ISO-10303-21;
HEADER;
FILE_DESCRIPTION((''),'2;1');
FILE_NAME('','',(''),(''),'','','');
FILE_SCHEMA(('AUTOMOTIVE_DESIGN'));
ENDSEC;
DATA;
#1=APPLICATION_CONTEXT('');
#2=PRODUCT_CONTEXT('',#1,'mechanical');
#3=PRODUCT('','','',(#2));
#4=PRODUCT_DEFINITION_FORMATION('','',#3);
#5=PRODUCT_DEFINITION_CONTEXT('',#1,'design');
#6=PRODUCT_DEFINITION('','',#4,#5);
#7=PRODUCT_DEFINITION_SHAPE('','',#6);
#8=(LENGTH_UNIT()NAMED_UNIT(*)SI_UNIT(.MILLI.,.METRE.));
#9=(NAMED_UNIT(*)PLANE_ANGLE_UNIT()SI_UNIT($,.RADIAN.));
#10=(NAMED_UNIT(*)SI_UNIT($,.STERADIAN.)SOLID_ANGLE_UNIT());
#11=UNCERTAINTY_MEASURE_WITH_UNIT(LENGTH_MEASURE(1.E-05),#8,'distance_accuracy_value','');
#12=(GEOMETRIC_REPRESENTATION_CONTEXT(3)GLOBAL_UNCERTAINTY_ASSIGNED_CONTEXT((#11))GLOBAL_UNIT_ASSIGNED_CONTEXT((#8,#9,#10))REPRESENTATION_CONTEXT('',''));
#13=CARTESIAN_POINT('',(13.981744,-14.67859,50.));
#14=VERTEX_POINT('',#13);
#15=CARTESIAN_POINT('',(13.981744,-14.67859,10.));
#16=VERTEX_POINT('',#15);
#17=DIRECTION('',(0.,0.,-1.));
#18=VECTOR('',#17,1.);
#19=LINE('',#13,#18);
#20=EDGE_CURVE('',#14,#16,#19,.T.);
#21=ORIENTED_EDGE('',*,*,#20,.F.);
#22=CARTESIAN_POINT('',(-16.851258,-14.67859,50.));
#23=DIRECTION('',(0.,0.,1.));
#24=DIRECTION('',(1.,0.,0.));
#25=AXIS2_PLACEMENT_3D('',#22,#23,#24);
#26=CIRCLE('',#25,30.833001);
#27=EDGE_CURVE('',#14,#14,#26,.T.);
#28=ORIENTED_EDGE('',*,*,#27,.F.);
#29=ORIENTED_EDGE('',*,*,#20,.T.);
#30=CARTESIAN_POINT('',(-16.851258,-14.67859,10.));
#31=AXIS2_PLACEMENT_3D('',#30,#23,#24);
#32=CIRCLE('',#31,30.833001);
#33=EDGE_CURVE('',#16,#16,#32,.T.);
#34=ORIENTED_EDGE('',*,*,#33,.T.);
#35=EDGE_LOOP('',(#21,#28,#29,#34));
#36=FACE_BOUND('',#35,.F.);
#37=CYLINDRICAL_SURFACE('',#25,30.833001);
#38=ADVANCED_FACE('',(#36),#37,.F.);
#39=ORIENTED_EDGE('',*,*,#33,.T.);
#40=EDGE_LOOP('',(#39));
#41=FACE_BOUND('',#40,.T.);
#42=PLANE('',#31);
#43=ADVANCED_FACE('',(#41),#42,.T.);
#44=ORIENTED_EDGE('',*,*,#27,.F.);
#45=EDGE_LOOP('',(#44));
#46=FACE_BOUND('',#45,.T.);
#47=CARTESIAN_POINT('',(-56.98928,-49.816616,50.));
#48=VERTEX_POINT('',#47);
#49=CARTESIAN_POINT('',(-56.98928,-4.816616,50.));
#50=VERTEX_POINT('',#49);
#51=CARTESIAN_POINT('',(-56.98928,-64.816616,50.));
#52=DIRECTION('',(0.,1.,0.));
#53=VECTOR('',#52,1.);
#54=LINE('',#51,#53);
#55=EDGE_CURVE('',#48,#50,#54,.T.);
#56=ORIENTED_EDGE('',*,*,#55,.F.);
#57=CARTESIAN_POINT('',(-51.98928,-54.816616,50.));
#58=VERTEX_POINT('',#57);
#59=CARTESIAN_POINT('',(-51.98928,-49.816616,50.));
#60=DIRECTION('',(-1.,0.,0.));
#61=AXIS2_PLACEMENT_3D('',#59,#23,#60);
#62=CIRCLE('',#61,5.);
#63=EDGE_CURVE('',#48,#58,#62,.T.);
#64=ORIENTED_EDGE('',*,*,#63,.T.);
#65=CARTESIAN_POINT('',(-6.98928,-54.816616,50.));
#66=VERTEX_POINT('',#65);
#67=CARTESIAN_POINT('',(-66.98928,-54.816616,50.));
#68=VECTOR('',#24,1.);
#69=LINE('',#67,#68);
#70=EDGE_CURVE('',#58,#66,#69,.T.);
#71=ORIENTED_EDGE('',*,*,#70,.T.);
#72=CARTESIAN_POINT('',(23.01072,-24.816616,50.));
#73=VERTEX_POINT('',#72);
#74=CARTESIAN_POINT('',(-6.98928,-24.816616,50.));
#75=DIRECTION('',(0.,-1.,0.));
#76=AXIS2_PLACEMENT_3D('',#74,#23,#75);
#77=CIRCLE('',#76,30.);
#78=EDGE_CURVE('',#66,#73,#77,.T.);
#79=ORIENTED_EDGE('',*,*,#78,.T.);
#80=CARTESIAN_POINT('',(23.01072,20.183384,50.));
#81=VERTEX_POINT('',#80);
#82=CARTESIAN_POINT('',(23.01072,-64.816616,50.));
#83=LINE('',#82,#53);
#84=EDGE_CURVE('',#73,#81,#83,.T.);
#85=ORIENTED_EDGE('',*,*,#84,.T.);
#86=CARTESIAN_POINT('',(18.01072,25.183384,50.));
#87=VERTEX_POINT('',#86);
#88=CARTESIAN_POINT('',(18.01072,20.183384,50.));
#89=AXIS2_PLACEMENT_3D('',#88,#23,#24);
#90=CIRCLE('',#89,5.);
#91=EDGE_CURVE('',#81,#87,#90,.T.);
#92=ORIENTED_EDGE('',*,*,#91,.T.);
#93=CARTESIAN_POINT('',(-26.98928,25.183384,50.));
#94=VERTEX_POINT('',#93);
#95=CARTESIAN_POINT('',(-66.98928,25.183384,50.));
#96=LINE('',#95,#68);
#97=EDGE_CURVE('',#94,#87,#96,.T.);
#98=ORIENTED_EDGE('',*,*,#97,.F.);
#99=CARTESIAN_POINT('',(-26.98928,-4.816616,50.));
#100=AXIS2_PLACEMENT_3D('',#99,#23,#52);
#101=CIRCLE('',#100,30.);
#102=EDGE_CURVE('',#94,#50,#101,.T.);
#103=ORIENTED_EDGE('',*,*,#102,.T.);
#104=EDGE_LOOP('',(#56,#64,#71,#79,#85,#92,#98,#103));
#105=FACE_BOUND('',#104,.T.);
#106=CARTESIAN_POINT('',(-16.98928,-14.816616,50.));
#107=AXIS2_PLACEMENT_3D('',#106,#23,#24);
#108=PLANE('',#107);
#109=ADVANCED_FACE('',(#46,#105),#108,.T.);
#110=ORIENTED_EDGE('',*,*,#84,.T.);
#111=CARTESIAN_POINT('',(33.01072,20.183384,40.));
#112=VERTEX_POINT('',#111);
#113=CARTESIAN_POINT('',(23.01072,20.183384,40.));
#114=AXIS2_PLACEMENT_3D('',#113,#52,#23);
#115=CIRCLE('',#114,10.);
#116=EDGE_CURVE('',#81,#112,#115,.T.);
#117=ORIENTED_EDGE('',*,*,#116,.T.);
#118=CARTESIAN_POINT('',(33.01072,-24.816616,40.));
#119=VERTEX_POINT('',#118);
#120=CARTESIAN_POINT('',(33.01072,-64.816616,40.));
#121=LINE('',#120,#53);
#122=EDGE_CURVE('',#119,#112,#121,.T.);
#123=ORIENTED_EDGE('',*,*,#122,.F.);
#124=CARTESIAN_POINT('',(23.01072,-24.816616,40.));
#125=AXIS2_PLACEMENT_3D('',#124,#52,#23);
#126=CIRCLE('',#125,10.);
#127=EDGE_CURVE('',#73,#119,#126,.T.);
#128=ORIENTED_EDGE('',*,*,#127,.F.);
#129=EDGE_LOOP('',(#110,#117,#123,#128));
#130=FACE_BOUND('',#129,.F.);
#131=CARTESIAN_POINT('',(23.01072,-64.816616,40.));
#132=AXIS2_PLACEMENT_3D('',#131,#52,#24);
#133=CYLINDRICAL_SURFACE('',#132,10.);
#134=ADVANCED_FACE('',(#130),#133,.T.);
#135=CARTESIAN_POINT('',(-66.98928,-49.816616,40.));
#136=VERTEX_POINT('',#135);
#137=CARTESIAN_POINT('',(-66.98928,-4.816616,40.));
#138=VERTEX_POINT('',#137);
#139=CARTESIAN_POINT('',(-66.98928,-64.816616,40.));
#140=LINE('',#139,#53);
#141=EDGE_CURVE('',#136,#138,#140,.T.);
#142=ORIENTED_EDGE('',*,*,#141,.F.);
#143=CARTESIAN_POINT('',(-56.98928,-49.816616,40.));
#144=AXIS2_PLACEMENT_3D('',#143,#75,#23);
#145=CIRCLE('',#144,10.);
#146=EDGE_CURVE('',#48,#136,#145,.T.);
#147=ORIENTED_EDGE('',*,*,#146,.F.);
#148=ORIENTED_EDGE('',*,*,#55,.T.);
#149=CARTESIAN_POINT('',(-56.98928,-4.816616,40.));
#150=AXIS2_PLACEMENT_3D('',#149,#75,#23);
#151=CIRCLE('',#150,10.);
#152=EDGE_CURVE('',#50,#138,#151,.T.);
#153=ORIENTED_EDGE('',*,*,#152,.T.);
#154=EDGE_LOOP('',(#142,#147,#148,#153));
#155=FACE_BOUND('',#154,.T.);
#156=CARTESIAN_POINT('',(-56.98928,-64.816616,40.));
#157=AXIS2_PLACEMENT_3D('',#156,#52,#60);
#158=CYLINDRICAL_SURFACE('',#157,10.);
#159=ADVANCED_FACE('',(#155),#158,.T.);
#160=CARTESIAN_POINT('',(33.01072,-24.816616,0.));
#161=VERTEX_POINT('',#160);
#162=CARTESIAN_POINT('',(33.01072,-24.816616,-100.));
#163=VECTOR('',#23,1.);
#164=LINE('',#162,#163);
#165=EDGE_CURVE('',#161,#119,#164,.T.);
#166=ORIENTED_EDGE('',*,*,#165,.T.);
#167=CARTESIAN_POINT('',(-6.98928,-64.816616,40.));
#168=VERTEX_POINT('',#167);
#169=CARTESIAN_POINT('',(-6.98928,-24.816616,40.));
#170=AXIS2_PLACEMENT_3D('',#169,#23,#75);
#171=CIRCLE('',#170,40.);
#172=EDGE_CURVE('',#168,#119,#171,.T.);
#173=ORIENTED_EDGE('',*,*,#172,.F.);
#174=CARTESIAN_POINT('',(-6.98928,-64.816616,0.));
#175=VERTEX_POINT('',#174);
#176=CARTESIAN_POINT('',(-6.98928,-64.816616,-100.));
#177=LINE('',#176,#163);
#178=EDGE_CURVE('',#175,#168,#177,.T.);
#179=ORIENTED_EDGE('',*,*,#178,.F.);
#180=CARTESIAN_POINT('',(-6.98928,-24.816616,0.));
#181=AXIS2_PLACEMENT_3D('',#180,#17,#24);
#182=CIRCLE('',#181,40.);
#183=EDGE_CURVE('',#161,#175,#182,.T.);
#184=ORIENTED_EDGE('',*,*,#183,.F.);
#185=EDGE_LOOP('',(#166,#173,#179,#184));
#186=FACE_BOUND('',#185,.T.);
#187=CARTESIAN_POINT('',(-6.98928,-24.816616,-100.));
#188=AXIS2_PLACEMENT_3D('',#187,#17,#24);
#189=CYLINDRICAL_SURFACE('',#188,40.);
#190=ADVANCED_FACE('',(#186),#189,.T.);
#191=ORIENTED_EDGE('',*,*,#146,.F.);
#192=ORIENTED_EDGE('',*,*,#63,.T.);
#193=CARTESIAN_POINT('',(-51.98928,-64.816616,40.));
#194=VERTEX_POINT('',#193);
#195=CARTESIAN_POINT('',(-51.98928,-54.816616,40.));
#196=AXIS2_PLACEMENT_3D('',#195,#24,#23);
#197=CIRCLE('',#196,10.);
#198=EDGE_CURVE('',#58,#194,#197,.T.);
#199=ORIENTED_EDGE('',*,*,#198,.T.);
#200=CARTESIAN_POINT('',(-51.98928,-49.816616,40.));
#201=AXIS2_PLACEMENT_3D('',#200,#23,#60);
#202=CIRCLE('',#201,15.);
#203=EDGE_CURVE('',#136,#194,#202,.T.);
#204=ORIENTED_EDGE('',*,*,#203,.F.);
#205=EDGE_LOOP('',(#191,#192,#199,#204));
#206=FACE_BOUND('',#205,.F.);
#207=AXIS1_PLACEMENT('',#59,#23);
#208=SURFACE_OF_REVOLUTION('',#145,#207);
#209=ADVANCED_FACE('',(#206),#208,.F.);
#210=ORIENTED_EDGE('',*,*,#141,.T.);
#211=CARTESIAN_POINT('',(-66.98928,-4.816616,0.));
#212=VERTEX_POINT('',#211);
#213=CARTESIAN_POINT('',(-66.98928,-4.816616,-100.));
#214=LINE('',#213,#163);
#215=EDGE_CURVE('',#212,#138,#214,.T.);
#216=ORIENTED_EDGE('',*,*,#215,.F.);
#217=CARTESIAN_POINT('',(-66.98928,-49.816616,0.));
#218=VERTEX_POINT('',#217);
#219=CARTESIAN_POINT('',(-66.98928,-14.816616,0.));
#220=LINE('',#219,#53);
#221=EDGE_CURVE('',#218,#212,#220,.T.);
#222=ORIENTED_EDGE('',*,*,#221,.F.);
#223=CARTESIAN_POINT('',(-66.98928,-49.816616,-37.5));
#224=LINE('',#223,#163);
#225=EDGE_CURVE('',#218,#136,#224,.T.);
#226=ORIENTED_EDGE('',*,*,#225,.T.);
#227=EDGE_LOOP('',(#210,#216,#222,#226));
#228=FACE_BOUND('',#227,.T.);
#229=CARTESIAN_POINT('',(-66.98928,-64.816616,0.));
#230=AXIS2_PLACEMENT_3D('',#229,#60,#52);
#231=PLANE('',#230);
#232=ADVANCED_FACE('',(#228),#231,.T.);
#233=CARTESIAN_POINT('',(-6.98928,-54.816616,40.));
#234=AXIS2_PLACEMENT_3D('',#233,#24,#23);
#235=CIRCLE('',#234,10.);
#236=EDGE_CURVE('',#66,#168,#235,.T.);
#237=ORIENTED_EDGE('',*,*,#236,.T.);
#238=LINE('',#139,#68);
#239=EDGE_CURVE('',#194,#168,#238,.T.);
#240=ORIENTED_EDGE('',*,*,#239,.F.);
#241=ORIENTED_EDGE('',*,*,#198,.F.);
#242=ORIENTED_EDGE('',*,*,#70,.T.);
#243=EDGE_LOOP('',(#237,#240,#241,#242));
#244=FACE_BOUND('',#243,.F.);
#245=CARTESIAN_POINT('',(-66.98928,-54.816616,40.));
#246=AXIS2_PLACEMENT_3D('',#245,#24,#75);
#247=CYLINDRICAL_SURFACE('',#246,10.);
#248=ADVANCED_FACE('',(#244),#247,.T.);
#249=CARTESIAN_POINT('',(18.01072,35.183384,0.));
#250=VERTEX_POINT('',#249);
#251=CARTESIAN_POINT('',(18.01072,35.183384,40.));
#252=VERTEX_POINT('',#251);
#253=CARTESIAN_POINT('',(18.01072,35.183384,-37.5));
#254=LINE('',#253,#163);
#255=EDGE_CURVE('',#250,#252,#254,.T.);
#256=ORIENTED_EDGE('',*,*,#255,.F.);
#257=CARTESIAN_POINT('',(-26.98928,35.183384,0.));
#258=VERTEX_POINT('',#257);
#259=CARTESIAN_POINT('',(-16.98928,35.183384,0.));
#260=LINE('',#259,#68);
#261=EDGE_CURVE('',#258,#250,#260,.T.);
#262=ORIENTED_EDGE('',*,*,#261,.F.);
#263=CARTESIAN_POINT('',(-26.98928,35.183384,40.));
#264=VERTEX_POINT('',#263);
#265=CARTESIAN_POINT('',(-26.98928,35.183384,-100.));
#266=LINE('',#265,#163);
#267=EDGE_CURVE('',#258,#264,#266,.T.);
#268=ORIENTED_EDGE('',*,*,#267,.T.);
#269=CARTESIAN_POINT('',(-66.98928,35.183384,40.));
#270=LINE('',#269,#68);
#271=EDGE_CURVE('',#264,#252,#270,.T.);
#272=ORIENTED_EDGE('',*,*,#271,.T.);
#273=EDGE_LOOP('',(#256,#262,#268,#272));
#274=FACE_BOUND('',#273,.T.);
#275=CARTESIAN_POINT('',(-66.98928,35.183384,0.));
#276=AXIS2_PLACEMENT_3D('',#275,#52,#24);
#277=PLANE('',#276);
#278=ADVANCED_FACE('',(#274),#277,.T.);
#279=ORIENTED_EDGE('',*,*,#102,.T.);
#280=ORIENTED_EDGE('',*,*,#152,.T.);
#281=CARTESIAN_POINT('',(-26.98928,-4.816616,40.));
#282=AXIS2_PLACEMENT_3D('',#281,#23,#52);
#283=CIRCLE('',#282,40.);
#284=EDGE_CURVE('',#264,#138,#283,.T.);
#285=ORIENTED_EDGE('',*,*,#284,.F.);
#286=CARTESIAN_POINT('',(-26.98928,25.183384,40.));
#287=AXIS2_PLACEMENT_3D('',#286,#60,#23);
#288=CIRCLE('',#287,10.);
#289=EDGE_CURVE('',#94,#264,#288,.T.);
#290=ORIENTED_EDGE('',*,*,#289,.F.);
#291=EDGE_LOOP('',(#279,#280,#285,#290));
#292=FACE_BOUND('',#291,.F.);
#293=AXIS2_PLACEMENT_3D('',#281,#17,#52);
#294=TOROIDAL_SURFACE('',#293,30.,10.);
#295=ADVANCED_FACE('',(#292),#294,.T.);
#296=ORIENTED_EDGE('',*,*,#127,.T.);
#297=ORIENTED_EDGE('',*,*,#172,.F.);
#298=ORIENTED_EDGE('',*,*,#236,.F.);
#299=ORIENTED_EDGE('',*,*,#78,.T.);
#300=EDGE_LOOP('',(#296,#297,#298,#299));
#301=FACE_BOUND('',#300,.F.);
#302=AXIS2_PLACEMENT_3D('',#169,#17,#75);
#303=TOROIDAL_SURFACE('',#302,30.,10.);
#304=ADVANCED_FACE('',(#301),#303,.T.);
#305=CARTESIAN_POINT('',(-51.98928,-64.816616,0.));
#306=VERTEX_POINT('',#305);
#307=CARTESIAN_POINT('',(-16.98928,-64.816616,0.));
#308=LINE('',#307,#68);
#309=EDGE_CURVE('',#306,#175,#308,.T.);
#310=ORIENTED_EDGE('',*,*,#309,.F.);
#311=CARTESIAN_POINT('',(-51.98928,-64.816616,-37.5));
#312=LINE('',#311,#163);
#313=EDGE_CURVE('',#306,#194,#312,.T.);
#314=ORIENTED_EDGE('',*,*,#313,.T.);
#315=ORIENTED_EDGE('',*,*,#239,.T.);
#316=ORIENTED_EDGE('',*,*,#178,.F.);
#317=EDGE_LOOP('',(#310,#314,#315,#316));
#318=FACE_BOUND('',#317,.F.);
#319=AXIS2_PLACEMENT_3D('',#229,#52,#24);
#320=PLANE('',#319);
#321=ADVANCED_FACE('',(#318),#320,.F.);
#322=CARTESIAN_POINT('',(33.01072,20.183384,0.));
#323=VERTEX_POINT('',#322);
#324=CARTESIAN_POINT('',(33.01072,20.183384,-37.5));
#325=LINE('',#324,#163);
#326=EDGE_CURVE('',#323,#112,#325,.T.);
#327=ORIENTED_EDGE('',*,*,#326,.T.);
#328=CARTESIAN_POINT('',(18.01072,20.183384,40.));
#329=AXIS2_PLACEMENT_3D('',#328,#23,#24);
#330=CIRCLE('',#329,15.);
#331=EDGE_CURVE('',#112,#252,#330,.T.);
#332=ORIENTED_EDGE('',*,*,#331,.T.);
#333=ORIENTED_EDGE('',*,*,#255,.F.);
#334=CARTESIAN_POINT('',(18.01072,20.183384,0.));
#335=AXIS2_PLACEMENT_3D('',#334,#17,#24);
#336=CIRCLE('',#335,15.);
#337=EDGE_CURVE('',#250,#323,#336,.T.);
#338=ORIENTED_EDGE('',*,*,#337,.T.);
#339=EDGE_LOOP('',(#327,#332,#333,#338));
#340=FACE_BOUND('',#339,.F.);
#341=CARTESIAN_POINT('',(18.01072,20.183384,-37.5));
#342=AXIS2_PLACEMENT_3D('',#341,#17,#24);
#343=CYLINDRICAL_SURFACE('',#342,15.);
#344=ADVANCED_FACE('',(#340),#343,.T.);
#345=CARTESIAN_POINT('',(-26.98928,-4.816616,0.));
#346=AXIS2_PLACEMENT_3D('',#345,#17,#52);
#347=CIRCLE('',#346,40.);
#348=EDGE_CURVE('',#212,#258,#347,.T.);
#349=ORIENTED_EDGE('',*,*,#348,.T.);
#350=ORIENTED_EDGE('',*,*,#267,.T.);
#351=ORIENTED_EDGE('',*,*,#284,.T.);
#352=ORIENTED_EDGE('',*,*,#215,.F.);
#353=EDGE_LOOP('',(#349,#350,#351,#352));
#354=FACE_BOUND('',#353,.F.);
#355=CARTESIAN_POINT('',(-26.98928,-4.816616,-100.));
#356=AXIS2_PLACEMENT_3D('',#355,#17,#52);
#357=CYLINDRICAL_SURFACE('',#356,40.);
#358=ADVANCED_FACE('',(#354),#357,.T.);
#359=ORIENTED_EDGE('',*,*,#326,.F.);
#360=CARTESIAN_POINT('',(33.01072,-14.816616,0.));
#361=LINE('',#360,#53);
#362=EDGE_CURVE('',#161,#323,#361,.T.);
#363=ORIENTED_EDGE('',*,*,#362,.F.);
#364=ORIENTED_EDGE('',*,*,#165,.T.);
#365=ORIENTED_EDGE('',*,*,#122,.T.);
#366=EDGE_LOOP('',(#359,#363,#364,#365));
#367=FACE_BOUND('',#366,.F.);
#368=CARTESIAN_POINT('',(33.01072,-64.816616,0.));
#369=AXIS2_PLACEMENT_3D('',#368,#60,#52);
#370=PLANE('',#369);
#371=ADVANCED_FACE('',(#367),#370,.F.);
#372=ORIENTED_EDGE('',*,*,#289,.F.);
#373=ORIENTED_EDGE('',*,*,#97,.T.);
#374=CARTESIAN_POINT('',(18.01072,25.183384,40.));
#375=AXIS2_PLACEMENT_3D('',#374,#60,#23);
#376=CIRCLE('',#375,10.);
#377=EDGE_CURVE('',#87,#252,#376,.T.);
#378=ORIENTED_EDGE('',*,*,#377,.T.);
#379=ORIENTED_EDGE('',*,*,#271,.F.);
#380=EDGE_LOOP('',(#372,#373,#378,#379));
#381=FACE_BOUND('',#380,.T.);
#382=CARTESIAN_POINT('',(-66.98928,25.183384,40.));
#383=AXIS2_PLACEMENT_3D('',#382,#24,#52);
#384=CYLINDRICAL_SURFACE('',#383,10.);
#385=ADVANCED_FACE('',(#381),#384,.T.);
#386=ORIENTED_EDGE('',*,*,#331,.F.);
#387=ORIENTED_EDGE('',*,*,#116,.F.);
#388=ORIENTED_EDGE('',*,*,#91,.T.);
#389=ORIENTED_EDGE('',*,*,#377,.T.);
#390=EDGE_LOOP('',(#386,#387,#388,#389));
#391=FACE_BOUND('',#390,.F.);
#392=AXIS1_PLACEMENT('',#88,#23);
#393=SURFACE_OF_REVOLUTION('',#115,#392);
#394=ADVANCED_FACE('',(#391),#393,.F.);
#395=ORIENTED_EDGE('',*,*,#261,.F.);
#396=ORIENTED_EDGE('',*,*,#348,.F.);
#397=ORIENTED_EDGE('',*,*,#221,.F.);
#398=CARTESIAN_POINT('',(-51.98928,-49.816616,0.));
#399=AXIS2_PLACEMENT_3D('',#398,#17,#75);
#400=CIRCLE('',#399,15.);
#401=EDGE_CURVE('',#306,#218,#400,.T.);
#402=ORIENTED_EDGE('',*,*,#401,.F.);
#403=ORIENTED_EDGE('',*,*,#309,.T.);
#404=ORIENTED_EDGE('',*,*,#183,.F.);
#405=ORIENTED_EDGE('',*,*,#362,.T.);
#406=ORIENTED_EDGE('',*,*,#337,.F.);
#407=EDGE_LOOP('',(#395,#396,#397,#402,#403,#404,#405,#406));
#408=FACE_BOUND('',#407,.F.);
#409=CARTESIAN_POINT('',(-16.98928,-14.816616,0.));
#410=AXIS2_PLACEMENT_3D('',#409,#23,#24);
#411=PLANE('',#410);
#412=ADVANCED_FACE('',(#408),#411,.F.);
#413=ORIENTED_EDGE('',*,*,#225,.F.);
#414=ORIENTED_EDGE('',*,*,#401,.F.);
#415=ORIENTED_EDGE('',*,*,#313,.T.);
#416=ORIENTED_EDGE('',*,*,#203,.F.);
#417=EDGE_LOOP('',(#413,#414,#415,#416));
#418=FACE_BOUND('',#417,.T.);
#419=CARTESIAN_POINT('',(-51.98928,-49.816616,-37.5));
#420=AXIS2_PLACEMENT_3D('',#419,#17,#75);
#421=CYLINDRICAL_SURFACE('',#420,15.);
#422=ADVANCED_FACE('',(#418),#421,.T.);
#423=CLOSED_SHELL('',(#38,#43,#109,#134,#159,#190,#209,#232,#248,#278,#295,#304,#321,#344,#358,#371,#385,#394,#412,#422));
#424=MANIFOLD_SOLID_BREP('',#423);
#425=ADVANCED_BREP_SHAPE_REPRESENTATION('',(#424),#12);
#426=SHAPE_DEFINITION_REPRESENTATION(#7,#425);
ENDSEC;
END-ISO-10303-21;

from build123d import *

# Parameters (mm, degrees)
F0_W        = 100
F0_H        = 100
F1_DEPTH    = 50
F2_R        = 10
F3_T1_DEPTH = 150
F3_T4_ANGLE = 90
F3_T6_ANGLE = 90
F4_T1_DEPTH = 87.5
F4_T4_ANGLE = 90
F4_T6_ANGLE = 90
F5_R        = 30.8330010445
F6_DEPTH    = 40


# Not quite as in the source:
# - a fillet or chamfer that OpenCascade refuses, or shapes differently, is made with other operations: its cross-section is extruded or revolved along the edge and cut away or added


with BuildPart() as f1:
    # F0 (on Top) → F1 (new body)
    with BuildSketch(Plane.XY):
        with Locations((-16.9892802835, -14.8166164756)):
            Rectangle(F0_W, F0_H)
    extrude(amount=F1_DEPTH)

    # F2
    f2_edges = [f1.edges().sort_by_distance(p)[0] for p in [
        (-16.98928, -64.816616, 50),
        (33.01072, -14.816616, 50),
        (-16.98928, 35.183384, 50),
        (-66.98928, -14.816616, 50),
    ]]
    fillet(f2_edges, radius=F2_R)

    # F3: fillet of radius 40 on 2 edges, made by hand

    # F3_s2 → F3_t1 (cut)
    with BuildSketch(Plane.XY.offset(-100)):
        with BuildLine():
            ThreePointArc((33.0107197165, -24.8166164756), (21.294990964, -53.100887723), (-6.9892802835, -64.8166164756))
            Line((-6.9892802835, -64.8166164756), (33.0107197165, -64.8166164756))
            Line((33.0107197165, -64.8166164756), (33.0107197165, -24.8166164756))
        make_face()
        with BuildLine():
            ThreePointArc((-26.9892802835, 35.1833835244), (-55.2735515309, 23.4676547719), (-66.9892802835, -4.8166164756))
            Line((-66.9892802835, -4.8166164756), (-66.9892802835, 35.1833835244))
            Line((-66.9892802835, 35.1833835244), (-26.9892802835, 35.1833835244))
        make_face()
    extrude(amount=F3_T1_DEPTH, mode=Mode.SUBTRACT)

    # F3_s3 → F3_t4 (revolve, cut)
    with BuildSketch(Plane.YZ.offset(-26.9892802835)):
        with BuildLine():
            ThreePointArc((25.1833835244, 50), (32.2544513363, 47.0710678119), (35.1833835244, 40))
            Line((35.1833835244, 40), (35.1833835244, 50))
            Line((35.1833835244, 50), (25.1833835244, 50))
        make_face()
    revolve(axis=Axis((-26.9892802835, -4.8166164756, 50), (0, 0, 1)), revolution_arc=F3_T4_ANGLE, mode=Mode.SUBTRACT)

    # F3_s5 → F3_t6 (revolve, cut)
    with BuildSketch(Plane.YZ.offset(-6.9892802835)):
        with BuildLine():
            ThreePointArc((-54.8166164756, 50), (-61.8876842874, 47.0710678119), (-64.8166164756, 40))
            Line((-64.8166164756, 40), (-64.8166164756, 50))
            Line((-64.8166164756, 50), (-54.8166164756, 50))
        make_face()
    revolve(axis=Axis((-6.9892802835, -24.8166164756, 50), (0, 0, 1)), revolution_arc=F3_T6_ANGLE, mode=Mode.SUBTRACT)

    # F4: fillet of radius 15 on 2 edges, made by hand

    # F4_s2 → F4_t1 (cut)
    with BuildSketch(Plane.XY.offset(-37.5)):
        with BuildLine():
            ThreePointArc((33.0107197165, 20.1833835244), (28.6173214343, 30.7899852422), (18.0107197165, 35.1833835244))
            Line((18.0107197165, 35.1833835244), (33.0107197165, 35.1833835244))
            Line((33.0107197165, 35.1833835244), (33.0107197165, 20.1833835244))
        make_face()
        with BuildLine():
            ThreePointArc((-51.9892802835, -64.8166164756), (-62.5958820012, -60.4232181934), (-66.9892802835, -49.8166164756))
            Line((-66.9892802835, -49.8166164756), (-66.9892802835, -64.8166164756))
            Line((-66.9892802835, -64.8166164756), (-51.9892802835, -64.8166164756))
        make_face()
    extrude(amount=F4_T1_DEPTH, mode=Mode.SUBTRACT)

    # F4_s3 → F4_t4 (revolve, cut)
    with BuildSketch(Plane.XZ.offset(49.8166164756)):
        with BuildLine():
            ThreePointArc((-56.9892802835, 50), (-64.0603480953, 47.0710678119), (-66.9892802835, 40))
            Line((-66.9892802835, 40), (-66.9892802835, 50))
            Line((-66.9892802835, 50), (-56.9892802835, 50))
        make_face()
    revolve(axis=Axis((-51.9892802835, -49.8166164756, 50), (0, 0, 1)), revolution_arc=F4_T4_ANGLE, mode=Mode.SUBTRACT)

    # F4_s5 → F4_t6 (revolve, cut)
    with BuildSketch(Plane.XZ.offset(-20.1833835244)):
        with BuildLine():
            ThreePointArc((23.0107197165, 50), (30.0817875284, 47.0710678119), (33.0107197165, 40))
            Line((33.0107197165, 40), (33.0107197165, 50))
            Line((33.0107197165, 50), (23.0107197165, 50))
        make_face()
    revolve(axis=Axis((18.0107197165, 20.1833835244, 50), (0, 0, 1)), revolution_arc=F4_T6_ANGLE, mode=Mode.SUBTRACT)

    # F5 (on face) → F6 (cut)
    with BuildSketch(Plane.XY.offset(50)):
        with Locations((-16.8512575328, -14.6785899997)):
            Circle(F5_R)
    extrude(amount=-F6_DEPTH, mode=Mode.SUBTRACT)


solid = f1.part
